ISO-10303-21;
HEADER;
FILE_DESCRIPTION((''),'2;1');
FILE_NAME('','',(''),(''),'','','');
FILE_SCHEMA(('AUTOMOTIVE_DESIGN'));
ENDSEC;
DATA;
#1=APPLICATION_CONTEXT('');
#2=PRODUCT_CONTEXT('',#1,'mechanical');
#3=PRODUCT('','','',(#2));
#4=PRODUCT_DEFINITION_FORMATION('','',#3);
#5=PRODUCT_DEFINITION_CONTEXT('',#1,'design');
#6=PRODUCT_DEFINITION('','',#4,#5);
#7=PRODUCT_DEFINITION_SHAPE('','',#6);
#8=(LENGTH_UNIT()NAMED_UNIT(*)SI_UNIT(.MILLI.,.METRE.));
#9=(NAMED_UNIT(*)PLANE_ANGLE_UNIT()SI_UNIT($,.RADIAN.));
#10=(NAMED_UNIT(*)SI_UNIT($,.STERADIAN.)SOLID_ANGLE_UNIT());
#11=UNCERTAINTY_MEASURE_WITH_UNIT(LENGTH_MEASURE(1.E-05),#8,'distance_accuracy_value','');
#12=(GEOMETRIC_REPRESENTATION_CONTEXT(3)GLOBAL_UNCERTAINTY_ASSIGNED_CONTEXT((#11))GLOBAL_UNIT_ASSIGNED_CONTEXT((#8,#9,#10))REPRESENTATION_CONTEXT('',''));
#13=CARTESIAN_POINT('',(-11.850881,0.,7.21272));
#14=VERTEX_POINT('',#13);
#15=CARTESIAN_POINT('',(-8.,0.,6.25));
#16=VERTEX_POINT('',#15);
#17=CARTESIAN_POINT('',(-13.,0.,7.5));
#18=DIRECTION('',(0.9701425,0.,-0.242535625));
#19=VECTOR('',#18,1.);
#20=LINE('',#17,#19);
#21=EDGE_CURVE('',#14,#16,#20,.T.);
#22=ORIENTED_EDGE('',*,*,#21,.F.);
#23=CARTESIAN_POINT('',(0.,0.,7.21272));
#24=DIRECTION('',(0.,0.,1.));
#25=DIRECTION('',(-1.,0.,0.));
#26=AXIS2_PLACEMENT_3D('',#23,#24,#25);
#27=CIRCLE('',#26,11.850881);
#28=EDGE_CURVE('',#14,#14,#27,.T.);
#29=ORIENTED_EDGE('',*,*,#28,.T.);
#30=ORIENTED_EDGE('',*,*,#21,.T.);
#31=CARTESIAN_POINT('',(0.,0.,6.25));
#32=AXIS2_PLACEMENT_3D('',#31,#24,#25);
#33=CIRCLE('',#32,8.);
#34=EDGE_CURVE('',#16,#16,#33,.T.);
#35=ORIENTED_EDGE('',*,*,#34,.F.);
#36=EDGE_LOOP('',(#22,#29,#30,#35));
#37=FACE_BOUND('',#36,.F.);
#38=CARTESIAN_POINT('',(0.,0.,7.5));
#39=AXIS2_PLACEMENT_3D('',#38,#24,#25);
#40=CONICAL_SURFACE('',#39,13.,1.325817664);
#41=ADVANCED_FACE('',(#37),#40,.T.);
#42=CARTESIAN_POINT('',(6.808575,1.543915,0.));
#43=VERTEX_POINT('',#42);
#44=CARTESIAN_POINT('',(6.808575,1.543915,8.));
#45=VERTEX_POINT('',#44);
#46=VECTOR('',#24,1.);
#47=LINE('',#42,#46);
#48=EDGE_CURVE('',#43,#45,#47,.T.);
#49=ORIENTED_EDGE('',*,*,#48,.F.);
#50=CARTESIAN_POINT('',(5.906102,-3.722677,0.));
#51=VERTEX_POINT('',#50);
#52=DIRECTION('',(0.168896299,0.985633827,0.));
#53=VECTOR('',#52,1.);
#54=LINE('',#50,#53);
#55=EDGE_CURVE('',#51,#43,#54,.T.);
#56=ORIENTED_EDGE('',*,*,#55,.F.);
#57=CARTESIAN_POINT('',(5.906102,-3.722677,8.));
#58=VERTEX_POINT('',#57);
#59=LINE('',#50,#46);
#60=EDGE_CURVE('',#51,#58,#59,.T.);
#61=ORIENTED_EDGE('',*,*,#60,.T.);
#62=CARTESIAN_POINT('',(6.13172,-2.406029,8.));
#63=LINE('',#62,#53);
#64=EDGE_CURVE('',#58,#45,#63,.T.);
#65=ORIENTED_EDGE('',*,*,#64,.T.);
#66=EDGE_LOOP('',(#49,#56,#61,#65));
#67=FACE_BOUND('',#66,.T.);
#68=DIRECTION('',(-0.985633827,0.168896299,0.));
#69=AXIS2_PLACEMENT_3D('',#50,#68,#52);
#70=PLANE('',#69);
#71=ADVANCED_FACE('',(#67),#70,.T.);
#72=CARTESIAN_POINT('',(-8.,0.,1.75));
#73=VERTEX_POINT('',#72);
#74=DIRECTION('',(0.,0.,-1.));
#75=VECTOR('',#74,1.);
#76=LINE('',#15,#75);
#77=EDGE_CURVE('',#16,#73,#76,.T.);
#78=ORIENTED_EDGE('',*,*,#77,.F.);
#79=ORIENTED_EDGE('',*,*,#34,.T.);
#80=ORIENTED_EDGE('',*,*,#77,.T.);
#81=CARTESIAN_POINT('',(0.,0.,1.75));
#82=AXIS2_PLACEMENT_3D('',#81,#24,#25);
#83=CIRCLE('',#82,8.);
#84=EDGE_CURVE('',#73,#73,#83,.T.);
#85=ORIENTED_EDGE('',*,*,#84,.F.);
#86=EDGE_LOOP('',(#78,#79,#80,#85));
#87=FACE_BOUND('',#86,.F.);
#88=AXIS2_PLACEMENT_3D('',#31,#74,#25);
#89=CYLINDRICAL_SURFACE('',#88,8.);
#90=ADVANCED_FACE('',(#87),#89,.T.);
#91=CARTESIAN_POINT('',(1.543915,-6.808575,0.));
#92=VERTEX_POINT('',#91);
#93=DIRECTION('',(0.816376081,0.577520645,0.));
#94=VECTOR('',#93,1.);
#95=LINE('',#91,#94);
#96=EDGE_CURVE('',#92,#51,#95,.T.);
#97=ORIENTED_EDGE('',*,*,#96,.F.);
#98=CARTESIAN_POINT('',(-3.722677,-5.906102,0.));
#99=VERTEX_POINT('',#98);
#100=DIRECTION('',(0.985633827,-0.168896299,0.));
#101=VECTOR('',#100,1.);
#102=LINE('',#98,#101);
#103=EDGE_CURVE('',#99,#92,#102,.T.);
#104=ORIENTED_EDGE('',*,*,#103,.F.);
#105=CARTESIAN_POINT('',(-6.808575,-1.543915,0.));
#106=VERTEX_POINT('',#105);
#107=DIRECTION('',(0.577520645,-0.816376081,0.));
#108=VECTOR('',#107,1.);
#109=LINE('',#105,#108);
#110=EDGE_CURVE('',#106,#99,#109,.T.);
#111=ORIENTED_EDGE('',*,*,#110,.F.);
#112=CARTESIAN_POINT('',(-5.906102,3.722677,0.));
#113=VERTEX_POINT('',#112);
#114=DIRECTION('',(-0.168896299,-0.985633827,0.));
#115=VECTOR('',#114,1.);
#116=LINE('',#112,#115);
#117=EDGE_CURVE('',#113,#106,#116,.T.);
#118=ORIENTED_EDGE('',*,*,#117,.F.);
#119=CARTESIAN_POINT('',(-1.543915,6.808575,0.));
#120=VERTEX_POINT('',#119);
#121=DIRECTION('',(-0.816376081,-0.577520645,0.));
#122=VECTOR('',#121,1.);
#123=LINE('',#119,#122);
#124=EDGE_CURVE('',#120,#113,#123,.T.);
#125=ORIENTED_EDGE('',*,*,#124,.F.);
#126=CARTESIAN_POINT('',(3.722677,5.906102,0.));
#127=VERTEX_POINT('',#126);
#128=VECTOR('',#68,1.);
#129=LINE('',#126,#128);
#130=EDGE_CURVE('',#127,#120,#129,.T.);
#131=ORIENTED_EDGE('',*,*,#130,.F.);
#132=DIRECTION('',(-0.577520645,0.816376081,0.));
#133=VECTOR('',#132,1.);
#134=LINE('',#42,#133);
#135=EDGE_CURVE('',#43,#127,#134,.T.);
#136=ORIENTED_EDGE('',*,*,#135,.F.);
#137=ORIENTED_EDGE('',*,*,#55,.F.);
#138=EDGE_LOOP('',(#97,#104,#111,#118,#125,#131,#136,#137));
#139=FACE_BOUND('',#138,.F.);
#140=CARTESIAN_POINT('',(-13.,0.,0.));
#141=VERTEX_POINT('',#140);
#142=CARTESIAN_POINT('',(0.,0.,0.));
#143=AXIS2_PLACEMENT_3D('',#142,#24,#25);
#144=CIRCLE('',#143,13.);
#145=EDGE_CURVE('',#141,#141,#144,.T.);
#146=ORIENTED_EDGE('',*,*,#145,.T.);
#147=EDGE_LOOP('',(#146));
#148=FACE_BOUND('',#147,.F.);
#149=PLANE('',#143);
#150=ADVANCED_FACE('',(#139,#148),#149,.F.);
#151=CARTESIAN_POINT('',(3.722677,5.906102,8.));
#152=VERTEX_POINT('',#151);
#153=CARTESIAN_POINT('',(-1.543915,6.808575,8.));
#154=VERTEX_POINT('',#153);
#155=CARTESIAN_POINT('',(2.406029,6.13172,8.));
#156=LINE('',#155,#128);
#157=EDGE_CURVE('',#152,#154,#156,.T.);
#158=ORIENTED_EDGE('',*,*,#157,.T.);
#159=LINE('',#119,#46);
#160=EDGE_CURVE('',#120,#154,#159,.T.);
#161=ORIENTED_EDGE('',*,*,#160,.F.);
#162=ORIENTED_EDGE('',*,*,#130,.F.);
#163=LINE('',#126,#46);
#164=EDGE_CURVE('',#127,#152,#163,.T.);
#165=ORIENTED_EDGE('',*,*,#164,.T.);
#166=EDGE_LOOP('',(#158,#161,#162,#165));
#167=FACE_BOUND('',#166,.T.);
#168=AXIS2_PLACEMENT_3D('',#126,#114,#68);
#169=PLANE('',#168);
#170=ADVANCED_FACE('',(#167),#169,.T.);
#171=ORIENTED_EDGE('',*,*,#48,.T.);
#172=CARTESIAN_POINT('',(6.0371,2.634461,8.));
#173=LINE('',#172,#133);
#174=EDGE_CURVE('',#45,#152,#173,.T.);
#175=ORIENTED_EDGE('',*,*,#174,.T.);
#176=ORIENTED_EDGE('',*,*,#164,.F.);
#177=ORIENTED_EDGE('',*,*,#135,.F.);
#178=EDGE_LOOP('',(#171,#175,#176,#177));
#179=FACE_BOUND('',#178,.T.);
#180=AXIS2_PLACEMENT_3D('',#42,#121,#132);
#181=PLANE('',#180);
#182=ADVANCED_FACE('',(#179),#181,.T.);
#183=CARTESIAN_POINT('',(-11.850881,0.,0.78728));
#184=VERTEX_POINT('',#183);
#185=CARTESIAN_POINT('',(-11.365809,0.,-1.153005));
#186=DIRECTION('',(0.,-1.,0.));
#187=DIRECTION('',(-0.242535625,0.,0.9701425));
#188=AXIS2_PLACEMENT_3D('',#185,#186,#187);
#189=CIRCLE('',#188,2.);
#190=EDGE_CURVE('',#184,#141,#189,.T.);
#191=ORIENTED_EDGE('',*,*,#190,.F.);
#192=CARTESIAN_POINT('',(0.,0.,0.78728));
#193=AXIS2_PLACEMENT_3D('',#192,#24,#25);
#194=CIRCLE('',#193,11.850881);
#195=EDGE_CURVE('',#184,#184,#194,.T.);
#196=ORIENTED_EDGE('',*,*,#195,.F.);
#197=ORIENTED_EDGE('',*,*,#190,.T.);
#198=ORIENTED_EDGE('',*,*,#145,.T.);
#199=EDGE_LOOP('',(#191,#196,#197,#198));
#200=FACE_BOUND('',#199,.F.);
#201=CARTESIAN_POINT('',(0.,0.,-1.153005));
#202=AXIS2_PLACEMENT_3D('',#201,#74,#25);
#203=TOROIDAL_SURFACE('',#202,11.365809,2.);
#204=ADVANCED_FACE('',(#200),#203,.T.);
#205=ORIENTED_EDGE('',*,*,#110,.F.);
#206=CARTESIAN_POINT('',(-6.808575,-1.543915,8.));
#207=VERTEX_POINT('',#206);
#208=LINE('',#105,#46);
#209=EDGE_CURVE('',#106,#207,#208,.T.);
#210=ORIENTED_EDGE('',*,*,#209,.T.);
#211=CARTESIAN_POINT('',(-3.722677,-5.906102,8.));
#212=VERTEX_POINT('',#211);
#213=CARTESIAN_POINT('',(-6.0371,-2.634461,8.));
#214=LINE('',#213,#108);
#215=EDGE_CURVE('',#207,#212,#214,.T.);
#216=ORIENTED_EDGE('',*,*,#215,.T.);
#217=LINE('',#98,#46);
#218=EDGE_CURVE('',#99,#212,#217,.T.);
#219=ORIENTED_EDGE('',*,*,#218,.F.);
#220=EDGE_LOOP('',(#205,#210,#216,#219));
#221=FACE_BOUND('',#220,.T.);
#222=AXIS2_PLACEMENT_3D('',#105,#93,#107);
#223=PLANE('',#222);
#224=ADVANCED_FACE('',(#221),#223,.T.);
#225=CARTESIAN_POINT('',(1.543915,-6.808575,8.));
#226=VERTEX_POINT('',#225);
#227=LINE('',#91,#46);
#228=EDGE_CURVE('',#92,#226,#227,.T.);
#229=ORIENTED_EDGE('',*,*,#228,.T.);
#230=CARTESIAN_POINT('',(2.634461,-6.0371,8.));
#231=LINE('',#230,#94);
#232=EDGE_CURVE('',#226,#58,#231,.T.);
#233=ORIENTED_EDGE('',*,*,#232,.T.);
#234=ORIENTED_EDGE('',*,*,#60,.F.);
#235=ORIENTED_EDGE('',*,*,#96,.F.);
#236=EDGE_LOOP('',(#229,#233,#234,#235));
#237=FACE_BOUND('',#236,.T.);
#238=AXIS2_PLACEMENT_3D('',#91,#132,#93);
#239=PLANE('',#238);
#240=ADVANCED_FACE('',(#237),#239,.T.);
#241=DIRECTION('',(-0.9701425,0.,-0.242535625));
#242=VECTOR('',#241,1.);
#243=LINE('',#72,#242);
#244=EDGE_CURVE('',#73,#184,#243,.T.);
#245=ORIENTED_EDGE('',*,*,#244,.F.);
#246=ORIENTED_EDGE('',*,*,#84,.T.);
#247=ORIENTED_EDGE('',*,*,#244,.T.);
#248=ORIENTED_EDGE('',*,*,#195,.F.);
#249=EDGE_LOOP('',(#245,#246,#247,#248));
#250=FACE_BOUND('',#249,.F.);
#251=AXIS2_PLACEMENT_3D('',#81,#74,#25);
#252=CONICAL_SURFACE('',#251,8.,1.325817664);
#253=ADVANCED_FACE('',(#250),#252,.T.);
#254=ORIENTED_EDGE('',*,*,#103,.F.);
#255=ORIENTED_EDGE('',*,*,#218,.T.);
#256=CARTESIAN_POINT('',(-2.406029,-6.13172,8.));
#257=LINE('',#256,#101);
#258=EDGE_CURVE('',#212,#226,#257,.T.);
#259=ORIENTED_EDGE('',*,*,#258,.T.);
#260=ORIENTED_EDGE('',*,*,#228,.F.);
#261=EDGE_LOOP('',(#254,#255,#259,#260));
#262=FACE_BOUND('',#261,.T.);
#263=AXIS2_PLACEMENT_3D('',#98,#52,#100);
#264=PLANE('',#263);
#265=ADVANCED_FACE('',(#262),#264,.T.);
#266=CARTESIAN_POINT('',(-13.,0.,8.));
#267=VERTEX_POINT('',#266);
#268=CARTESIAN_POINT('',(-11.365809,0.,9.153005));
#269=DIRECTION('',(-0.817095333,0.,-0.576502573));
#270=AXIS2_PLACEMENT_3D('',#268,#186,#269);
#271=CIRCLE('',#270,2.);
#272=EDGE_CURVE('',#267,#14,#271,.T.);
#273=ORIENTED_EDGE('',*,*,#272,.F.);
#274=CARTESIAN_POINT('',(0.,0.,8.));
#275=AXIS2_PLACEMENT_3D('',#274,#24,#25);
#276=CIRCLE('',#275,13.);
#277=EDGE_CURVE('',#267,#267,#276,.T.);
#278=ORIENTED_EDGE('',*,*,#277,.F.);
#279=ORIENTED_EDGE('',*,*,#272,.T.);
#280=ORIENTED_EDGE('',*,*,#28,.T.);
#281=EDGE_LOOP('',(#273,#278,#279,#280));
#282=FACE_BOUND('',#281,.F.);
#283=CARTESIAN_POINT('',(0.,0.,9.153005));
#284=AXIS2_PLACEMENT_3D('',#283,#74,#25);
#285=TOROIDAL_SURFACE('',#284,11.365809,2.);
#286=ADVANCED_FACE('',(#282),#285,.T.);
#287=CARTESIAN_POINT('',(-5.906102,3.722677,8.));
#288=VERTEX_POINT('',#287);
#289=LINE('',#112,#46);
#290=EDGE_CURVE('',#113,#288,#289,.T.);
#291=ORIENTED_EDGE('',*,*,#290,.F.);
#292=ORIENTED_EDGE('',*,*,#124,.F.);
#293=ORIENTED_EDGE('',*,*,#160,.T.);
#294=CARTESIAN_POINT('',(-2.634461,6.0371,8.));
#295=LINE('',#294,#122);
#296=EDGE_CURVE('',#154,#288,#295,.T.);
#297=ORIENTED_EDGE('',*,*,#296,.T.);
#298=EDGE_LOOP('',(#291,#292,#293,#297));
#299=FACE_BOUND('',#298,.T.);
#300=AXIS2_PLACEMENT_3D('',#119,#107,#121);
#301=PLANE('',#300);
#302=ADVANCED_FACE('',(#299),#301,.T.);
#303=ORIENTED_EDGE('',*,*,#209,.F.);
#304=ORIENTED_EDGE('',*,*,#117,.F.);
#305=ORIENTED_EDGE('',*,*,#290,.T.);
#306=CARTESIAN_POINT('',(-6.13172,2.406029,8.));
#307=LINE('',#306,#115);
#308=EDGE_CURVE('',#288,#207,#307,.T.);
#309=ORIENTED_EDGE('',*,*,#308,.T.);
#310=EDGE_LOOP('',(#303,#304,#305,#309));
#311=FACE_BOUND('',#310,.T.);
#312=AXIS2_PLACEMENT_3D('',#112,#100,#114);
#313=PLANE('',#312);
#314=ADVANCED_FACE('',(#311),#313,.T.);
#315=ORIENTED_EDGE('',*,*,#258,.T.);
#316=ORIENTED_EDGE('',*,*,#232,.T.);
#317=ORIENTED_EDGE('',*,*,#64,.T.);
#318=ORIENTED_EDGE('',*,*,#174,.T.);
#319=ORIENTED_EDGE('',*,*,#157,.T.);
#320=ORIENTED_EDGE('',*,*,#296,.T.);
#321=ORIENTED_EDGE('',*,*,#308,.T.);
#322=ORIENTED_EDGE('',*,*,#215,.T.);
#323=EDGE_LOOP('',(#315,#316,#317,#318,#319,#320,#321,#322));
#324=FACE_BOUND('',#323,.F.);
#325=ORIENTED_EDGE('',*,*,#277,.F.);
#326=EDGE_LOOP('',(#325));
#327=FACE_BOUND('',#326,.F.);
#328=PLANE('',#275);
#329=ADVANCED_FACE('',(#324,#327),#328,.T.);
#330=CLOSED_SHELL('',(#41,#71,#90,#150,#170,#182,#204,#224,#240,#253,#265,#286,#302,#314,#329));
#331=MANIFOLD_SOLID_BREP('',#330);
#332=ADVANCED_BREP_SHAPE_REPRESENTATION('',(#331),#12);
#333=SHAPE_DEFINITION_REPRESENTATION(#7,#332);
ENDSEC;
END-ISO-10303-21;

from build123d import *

# Parameters (mm, degrees)
F4_DEPTH = 8.001


# Not quite as in the source:
# - a fillet or chamfer that OpenCascade refuses, or shapes differently, is made with other operations: its cross-section is extruded or revolved along the edge and cut away or added


with BuildPart() as f1:
    # F0 (on Front) → F1 (revolve)
    with BuildSketch(Plane.XZ):
        Polygon((-13, 0), (0, 0), (0, 8), (-13, 8), (-13, 7.5), (-8, 6.25), (-8, 1.75), (-13, 0.5), align=None)
    revolve(axis=Axis((0, 0, 4), (0, 0, 1)))

    # F2: fillet of radius 2 on 2 edges, made by hand

    # F2_s1 → F2_t2 (revolve, cut)
    with BuildSketch(Plane.XZ):
        with BuildLine():
            ThreePointArc((-13, 8), (-12.4961942947, 7.5030870148), (-11.8508805842, 7.212720146))
            Line((-11.8508805842, 7.212720146), (-13, 7.5))
            Line((-13, 7.5), (-13, 8))
        make_face()
    revolve(axis=Axis((0, 0, 7.5), (0, 0, 1)), mode=Mode.SUBTRACT)

    # F2_s3 → F2_t4 (revolve, cut)
    with BuildSketch(Plane.XZ):
        with BuildLine():
            ThreePointArc((-11.8508805842, 0.787279854), (-12.4961942947, 0.4969129852), (-13, 0))
            Line((-13, 0), (-13, 0.5))
            Line((-13, 0.5), (-11.8508805842, 0.787279854))
        make_face()
    revolve(axis=Axis((0, 0, 0.5), (0, 0, 1)), mode=Mode.SUBTRACT)

    # F3 (on Top) → F4 (cut, through all)
    with BuildSketch(Plane.XY):
        Polygon((6.808574619, 1.5439145703), (3.722676821, 5.9061017456), (-1.5439145703, 6.808574619), (-5.9061017456, 3.722676821), (-6.808574619, -1.5439145703), (-3.722676821, -5.9061017456), (1.5439145703, -6.808574619), (5.9061017456, -3.722676821), align=None)
    extrude(amount=F4_DEPTH, mode=Mode.SUBTRACT)


solid = f1.part
